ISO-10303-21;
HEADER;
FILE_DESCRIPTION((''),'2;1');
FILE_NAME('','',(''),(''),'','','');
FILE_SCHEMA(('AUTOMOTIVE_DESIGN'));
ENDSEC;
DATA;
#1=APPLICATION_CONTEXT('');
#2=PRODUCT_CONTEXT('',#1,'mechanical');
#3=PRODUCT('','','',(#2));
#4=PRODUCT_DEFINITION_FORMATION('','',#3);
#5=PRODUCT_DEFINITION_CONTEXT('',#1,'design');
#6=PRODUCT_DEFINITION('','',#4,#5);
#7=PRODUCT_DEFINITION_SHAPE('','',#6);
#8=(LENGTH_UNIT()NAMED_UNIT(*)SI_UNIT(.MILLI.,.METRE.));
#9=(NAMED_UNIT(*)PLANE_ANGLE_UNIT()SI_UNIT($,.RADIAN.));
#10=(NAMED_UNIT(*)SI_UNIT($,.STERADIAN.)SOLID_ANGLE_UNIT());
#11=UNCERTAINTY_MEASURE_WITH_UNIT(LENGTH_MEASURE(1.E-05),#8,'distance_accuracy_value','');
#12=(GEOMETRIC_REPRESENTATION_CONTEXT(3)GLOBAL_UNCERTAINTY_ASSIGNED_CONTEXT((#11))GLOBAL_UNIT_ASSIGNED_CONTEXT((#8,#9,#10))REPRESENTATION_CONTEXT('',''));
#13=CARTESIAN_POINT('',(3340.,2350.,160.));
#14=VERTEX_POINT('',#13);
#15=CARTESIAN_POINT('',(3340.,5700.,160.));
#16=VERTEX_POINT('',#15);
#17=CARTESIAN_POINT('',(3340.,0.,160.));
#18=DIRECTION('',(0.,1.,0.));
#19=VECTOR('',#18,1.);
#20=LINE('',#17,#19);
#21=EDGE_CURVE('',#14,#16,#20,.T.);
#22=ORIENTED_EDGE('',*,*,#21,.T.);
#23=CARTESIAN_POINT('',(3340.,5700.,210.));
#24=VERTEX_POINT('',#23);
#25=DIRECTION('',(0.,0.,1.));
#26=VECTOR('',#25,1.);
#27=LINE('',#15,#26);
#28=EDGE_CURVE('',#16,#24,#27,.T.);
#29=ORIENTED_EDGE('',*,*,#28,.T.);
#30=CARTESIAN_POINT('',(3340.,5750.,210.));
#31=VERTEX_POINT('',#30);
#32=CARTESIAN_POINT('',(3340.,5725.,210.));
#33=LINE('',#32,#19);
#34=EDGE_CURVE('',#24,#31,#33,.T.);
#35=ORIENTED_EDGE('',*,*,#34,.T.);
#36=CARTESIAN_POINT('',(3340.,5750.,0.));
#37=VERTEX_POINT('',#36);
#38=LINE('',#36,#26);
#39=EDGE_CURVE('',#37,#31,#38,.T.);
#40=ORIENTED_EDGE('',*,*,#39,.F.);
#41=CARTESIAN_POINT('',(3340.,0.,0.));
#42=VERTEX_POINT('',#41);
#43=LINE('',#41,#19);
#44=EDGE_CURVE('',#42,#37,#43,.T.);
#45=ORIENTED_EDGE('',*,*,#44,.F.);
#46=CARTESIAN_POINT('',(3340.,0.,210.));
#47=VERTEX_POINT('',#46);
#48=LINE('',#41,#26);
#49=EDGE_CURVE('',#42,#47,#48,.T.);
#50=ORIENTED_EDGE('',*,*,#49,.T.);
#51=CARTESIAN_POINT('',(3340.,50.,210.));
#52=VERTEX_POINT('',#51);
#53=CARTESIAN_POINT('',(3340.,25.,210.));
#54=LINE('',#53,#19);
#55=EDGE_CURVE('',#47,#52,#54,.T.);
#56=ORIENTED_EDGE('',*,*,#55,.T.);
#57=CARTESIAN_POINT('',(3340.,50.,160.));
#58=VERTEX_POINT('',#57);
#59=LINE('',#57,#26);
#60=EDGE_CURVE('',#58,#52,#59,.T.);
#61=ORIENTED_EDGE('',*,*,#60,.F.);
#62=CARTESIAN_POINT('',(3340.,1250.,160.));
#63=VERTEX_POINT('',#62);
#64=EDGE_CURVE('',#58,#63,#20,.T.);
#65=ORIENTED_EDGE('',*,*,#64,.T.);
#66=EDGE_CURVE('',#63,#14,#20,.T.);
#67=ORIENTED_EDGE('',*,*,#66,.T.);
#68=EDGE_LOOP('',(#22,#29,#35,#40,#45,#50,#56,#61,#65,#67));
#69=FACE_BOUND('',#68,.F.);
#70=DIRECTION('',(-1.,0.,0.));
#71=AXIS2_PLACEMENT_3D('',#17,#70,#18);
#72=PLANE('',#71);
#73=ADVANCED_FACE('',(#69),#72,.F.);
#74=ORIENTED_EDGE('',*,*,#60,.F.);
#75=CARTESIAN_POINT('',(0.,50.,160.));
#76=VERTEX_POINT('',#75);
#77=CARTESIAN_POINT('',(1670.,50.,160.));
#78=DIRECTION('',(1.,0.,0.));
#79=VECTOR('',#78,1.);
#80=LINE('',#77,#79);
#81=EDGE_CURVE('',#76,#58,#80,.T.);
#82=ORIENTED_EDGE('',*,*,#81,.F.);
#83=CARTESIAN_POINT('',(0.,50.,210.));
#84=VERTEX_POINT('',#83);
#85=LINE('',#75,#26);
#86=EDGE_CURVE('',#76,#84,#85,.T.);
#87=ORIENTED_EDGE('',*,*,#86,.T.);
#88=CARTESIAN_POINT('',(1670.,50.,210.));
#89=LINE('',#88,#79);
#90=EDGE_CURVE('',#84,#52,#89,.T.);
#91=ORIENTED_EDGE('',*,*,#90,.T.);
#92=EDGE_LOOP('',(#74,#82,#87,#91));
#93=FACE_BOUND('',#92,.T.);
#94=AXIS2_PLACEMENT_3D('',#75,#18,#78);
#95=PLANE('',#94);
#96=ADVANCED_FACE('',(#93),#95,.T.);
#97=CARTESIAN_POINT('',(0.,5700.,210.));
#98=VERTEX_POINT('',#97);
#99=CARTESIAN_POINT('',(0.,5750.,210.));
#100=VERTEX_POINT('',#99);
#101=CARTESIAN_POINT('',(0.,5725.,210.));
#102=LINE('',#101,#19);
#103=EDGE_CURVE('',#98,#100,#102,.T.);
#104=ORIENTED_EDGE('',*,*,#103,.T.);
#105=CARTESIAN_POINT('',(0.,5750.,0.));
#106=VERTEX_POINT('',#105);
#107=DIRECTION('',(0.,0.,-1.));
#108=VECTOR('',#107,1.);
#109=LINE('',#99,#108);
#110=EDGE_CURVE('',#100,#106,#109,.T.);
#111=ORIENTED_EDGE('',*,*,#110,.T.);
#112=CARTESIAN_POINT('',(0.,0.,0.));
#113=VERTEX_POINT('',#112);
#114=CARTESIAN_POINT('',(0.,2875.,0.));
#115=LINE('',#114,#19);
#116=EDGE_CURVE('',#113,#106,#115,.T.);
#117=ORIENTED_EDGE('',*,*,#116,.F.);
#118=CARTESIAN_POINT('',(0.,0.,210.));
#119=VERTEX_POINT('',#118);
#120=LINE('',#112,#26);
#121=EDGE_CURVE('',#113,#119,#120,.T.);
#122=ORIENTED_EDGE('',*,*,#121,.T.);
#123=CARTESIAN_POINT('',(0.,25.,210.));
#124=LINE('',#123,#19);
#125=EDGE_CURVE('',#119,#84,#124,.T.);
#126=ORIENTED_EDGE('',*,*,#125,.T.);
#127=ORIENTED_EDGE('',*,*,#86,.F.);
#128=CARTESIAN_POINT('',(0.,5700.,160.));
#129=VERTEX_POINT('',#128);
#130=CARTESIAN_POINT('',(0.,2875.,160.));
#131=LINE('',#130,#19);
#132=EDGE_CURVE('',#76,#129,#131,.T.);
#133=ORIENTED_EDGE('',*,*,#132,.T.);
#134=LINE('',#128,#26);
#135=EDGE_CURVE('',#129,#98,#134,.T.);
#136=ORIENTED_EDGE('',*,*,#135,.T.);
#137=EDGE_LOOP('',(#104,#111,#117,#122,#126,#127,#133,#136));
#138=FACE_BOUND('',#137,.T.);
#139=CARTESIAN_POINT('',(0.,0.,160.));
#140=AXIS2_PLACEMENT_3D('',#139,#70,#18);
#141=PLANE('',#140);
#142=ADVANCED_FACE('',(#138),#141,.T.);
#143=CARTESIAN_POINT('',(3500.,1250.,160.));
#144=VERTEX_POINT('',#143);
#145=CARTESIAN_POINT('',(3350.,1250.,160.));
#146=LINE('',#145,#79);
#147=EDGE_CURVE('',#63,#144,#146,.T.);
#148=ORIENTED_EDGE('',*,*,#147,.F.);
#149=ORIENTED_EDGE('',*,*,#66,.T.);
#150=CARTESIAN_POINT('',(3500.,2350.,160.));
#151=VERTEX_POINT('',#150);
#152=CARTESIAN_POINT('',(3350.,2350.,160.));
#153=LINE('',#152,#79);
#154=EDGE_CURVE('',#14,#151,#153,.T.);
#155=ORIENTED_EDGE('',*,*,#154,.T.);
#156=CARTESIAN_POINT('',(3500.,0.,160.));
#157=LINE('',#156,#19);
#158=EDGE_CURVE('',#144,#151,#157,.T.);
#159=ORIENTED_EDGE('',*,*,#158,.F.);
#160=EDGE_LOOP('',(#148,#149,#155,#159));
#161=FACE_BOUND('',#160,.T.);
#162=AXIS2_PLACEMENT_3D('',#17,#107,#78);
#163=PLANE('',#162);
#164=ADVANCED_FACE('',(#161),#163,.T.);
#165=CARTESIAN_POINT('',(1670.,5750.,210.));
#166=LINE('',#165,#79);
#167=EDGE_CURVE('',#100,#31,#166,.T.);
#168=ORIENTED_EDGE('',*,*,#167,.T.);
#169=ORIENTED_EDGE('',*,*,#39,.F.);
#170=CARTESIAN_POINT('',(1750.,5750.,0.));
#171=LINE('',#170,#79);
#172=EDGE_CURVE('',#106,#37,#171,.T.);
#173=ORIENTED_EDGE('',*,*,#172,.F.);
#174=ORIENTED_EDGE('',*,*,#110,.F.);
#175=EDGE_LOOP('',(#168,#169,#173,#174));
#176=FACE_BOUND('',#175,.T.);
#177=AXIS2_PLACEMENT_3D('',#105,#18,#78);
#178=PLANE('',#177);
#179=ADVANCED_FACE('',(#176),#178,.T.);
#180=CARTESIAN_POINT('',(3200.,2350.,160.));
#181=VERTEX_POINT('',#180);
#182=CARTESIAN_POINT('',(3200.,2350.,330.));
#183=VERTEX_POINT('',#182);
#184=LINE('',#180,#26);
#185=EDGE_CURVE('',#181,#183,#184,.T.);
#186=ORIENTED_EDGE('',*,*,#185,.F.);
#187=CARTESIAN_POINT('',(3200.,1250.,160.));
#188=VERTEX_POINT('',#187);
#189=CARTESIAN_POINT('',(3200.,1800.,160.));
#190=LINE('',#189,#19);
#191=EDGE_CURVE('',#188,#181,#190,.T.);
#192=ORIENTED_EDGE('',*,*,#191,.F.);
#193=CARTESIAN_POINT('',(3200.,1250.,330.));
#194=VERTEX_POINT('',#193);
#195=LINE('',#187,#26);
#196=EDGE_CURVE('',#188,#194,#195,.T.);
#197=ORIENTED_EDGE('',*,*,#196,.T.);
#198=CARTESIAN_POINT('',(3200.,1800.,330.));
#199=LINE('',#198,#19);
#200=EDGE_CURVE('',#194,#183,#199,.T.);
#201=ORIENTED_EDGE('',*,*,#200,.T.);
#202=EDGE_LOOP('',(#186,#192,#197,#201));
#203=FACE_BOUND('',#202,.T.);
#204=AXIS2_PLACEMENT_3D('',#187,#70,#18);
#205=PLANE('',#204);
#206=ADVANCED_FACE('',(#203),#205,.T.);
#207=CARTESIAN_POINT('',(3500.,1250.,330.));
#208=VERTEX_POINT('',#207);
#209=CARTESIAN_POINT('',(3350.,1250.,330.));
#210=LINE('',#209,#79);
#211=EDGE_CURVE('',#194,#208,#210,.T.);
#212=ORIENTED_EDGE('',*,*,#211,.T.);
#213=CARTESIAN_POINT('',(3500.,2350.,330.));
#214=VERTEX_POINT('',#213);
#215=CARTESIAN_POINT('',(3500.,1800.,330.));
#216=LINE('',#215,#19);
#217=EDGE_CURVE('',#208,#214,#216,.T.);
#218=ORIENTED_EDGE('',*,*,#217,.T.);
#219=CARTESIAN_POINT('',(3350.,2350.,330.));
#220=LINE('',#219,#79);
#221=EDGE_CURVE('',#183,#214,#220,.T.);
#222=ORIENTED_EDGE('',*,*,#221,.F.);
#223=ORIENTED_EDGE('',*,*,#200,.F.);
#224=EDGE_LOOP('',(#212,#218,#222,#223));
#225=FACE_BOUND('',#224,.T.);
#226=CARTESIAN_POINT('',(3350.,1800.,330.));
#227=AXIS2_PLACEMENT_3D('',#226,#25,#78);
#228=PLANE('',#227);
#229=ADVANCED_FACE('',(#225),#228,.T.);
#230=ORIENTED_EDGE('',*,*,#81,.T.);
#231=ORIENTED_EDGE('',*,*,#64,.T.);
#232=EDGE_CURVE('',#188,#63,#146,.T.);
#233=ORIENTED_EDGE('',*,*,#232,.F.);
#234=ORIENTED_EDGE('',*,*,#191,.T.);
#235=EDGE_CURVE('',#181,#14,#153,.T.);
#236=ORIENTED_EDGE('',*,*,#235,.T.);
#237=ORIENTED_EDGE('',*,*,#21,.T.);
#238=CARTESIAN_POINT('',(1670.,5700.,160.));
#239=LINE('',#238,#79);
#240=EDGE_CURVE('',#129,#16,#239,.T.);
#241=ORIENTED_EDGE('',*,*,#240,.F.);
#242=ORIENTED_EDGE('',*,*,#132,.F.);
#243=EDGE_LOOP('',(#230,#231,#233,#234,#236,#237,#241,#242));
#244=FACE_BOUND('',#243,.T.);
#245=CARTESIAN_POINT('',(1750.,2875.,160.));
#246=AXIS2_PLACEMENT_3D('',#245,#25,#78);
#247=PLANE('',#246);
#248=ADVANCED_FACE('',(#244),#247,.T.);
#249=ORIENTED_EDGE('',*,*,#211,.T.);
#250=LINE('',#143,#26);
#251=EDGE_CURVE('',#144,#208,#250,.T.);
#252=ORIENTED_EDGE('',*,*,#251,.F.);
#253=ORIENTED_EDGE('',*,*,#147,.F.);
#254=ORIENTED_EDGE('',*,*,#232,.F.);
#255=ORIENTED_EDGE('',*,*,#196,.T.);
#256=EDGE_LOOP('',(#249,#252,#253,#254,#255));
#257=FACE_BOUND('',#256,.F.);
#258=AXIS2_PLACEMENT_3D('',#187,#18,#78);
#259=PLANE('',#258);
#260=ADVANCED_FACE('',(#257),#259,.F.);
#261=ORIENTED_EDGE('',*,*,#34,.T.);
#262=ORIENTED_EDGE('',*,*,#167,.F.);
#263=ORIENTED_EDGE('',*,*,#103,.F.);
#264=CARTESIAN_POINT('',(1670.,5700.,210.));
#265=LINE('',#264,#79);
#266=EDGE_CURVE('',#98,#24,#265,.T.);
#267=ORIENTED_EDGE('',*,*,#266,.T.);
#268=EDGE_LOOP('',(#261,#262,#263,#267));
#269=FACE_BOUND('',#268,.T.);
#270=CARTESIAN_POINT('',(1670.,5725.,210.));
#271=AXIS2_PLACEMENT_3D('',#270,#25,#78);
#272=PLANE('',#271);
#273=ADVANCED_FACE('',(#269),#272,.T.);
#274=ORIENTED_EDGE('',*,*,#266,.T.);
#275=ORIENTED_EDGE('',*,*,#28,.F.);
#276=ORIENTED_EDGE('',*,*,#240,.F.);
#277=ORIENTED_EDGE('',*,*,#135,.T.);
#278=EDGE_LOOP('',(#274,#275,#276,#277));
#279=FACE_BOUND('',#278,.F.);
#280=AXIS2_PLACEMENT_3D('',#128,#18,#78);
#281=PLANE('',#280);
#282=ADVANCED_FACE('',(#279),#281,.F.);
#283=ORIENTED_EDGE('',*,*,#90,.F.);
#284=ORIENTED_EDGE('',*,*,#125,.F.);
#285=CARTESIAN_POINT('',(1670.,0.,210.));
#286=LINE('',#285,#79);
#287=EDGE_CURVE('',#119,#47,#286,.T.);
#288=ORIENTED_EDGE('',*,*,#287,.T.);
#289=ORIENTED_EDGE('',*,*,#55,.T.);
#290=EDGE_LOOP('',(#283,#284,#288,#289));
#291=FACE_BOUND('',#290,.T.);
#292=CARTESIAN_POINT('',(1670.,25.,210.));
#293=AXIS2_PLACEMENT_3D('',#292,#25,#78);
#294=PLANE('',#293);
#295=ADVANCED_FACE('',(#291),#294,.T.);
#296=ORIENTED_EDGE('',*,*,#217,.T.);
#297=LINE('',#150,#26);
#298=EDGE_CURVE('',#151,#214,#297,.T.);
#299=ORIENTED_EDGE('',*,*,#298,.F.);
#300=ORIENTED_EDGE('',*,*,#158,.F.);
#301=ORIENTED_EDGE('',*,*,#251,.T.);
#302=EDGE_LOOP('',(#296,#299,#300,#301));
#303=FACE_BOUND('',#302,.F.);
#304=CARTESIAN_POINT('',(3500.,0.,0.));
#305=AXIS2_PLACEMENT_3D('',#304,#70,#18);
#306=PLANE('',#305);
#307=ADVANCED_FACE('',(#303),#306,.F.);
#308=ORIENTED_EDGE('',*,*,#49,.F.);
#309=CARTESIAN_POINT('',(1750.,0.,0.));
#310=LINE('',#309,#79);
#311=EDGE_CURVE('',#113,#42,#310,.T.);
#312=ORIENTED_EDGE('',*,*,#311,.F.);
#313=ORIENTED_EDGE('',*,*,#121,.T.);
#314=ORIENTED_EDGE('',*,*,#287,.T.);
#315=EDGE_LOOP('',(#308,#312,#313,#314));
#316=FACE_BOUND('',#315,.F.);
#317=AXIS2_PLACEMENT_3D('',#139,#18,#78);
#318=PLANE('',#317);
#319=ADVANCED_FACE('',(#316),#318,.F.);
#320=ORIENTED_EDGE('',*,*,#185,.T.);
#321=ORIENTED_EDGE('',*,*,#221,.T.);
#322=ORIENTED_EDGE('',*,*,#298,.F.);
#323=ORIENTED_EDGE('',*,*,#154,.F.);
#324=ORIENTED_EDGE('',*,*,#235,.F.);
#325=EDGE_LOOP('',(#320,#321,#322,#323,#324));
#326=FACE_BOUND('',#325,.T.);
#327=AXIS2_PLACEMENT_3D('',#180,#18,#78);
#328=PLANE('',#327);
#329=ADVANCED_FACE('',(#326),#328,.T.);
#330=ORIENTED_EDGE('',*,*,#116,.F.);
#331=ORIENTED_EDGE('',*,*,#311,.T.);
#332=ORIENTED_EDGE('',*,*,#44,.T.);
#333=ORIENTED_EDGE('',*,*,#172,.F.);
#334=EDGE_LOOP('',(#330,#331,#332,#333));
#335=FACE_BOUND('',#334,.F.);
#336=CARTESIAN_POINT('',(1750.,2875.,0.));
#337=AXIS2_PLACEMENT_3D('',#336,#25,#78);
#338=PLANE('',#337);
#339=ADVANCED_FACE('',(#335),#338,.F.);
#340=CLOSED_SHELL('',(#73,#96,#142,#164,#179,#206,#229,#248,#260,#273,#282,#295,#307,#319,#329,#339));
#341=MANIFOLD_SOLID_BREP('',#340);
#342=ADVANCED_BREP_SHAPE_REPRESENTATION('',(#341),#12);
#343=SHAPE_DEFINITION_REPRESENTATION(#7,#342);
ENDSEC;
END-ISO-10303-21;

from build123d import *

# Parameters (mm, degrees)
F0_W     = 3500
F0_H     = 5750
F1_DEPTH = 160
F2_W     = 300
F2_H     = 1100
F3_DEPTH = 170
F4_W     = 160
F4_H     = 160
F5_DEPTH = 5750.001
F8_W     = 3340
F8_H     = 50
F9_DEPTH = 50


# Not quite as in the source:
# - a feature of the source that left no trace in its solid (it failed there, or was rolled back) is left out


with BuildPart() as f1:
    # F0 (on Top) → F1 (new body)
    with BuildSketch(Plane.XY):
        with Locations((1750, 2875)):
            Rectangle(F0_W, F0_H)
    extrude(amount=F1_DEPTH)

    # F2 (on face) → F3 (join)
    with BuildSketch(Plane.XY.offset(160)):
        with Locations((3350, 1800)):
            Rectangle(F2_W, F2_H)
    extrude(amount=F3_DEPTH)

    # F4 (on face) → F5 (cut, through all)
    with BuildSketch(Plane.XZ):
        with Locations((3420, 80)):
            Rectangle(F4_W, F4_H)
    extrude(amount=-F5_DEPTH, mode=Mode.SUBTRACT)

    # F8 (on face) → F9 (join)
    with BuildSketch(Plane.XY.offset(160)):
        with Locations((1670, 25)):
            Rectangle(F8_W, F8_H)
        with Locations((1670, 5725)):
            Rectangle(F8_W, F8_H)
    extrude(amount=F9_DEPTH)


solid = f1.part
